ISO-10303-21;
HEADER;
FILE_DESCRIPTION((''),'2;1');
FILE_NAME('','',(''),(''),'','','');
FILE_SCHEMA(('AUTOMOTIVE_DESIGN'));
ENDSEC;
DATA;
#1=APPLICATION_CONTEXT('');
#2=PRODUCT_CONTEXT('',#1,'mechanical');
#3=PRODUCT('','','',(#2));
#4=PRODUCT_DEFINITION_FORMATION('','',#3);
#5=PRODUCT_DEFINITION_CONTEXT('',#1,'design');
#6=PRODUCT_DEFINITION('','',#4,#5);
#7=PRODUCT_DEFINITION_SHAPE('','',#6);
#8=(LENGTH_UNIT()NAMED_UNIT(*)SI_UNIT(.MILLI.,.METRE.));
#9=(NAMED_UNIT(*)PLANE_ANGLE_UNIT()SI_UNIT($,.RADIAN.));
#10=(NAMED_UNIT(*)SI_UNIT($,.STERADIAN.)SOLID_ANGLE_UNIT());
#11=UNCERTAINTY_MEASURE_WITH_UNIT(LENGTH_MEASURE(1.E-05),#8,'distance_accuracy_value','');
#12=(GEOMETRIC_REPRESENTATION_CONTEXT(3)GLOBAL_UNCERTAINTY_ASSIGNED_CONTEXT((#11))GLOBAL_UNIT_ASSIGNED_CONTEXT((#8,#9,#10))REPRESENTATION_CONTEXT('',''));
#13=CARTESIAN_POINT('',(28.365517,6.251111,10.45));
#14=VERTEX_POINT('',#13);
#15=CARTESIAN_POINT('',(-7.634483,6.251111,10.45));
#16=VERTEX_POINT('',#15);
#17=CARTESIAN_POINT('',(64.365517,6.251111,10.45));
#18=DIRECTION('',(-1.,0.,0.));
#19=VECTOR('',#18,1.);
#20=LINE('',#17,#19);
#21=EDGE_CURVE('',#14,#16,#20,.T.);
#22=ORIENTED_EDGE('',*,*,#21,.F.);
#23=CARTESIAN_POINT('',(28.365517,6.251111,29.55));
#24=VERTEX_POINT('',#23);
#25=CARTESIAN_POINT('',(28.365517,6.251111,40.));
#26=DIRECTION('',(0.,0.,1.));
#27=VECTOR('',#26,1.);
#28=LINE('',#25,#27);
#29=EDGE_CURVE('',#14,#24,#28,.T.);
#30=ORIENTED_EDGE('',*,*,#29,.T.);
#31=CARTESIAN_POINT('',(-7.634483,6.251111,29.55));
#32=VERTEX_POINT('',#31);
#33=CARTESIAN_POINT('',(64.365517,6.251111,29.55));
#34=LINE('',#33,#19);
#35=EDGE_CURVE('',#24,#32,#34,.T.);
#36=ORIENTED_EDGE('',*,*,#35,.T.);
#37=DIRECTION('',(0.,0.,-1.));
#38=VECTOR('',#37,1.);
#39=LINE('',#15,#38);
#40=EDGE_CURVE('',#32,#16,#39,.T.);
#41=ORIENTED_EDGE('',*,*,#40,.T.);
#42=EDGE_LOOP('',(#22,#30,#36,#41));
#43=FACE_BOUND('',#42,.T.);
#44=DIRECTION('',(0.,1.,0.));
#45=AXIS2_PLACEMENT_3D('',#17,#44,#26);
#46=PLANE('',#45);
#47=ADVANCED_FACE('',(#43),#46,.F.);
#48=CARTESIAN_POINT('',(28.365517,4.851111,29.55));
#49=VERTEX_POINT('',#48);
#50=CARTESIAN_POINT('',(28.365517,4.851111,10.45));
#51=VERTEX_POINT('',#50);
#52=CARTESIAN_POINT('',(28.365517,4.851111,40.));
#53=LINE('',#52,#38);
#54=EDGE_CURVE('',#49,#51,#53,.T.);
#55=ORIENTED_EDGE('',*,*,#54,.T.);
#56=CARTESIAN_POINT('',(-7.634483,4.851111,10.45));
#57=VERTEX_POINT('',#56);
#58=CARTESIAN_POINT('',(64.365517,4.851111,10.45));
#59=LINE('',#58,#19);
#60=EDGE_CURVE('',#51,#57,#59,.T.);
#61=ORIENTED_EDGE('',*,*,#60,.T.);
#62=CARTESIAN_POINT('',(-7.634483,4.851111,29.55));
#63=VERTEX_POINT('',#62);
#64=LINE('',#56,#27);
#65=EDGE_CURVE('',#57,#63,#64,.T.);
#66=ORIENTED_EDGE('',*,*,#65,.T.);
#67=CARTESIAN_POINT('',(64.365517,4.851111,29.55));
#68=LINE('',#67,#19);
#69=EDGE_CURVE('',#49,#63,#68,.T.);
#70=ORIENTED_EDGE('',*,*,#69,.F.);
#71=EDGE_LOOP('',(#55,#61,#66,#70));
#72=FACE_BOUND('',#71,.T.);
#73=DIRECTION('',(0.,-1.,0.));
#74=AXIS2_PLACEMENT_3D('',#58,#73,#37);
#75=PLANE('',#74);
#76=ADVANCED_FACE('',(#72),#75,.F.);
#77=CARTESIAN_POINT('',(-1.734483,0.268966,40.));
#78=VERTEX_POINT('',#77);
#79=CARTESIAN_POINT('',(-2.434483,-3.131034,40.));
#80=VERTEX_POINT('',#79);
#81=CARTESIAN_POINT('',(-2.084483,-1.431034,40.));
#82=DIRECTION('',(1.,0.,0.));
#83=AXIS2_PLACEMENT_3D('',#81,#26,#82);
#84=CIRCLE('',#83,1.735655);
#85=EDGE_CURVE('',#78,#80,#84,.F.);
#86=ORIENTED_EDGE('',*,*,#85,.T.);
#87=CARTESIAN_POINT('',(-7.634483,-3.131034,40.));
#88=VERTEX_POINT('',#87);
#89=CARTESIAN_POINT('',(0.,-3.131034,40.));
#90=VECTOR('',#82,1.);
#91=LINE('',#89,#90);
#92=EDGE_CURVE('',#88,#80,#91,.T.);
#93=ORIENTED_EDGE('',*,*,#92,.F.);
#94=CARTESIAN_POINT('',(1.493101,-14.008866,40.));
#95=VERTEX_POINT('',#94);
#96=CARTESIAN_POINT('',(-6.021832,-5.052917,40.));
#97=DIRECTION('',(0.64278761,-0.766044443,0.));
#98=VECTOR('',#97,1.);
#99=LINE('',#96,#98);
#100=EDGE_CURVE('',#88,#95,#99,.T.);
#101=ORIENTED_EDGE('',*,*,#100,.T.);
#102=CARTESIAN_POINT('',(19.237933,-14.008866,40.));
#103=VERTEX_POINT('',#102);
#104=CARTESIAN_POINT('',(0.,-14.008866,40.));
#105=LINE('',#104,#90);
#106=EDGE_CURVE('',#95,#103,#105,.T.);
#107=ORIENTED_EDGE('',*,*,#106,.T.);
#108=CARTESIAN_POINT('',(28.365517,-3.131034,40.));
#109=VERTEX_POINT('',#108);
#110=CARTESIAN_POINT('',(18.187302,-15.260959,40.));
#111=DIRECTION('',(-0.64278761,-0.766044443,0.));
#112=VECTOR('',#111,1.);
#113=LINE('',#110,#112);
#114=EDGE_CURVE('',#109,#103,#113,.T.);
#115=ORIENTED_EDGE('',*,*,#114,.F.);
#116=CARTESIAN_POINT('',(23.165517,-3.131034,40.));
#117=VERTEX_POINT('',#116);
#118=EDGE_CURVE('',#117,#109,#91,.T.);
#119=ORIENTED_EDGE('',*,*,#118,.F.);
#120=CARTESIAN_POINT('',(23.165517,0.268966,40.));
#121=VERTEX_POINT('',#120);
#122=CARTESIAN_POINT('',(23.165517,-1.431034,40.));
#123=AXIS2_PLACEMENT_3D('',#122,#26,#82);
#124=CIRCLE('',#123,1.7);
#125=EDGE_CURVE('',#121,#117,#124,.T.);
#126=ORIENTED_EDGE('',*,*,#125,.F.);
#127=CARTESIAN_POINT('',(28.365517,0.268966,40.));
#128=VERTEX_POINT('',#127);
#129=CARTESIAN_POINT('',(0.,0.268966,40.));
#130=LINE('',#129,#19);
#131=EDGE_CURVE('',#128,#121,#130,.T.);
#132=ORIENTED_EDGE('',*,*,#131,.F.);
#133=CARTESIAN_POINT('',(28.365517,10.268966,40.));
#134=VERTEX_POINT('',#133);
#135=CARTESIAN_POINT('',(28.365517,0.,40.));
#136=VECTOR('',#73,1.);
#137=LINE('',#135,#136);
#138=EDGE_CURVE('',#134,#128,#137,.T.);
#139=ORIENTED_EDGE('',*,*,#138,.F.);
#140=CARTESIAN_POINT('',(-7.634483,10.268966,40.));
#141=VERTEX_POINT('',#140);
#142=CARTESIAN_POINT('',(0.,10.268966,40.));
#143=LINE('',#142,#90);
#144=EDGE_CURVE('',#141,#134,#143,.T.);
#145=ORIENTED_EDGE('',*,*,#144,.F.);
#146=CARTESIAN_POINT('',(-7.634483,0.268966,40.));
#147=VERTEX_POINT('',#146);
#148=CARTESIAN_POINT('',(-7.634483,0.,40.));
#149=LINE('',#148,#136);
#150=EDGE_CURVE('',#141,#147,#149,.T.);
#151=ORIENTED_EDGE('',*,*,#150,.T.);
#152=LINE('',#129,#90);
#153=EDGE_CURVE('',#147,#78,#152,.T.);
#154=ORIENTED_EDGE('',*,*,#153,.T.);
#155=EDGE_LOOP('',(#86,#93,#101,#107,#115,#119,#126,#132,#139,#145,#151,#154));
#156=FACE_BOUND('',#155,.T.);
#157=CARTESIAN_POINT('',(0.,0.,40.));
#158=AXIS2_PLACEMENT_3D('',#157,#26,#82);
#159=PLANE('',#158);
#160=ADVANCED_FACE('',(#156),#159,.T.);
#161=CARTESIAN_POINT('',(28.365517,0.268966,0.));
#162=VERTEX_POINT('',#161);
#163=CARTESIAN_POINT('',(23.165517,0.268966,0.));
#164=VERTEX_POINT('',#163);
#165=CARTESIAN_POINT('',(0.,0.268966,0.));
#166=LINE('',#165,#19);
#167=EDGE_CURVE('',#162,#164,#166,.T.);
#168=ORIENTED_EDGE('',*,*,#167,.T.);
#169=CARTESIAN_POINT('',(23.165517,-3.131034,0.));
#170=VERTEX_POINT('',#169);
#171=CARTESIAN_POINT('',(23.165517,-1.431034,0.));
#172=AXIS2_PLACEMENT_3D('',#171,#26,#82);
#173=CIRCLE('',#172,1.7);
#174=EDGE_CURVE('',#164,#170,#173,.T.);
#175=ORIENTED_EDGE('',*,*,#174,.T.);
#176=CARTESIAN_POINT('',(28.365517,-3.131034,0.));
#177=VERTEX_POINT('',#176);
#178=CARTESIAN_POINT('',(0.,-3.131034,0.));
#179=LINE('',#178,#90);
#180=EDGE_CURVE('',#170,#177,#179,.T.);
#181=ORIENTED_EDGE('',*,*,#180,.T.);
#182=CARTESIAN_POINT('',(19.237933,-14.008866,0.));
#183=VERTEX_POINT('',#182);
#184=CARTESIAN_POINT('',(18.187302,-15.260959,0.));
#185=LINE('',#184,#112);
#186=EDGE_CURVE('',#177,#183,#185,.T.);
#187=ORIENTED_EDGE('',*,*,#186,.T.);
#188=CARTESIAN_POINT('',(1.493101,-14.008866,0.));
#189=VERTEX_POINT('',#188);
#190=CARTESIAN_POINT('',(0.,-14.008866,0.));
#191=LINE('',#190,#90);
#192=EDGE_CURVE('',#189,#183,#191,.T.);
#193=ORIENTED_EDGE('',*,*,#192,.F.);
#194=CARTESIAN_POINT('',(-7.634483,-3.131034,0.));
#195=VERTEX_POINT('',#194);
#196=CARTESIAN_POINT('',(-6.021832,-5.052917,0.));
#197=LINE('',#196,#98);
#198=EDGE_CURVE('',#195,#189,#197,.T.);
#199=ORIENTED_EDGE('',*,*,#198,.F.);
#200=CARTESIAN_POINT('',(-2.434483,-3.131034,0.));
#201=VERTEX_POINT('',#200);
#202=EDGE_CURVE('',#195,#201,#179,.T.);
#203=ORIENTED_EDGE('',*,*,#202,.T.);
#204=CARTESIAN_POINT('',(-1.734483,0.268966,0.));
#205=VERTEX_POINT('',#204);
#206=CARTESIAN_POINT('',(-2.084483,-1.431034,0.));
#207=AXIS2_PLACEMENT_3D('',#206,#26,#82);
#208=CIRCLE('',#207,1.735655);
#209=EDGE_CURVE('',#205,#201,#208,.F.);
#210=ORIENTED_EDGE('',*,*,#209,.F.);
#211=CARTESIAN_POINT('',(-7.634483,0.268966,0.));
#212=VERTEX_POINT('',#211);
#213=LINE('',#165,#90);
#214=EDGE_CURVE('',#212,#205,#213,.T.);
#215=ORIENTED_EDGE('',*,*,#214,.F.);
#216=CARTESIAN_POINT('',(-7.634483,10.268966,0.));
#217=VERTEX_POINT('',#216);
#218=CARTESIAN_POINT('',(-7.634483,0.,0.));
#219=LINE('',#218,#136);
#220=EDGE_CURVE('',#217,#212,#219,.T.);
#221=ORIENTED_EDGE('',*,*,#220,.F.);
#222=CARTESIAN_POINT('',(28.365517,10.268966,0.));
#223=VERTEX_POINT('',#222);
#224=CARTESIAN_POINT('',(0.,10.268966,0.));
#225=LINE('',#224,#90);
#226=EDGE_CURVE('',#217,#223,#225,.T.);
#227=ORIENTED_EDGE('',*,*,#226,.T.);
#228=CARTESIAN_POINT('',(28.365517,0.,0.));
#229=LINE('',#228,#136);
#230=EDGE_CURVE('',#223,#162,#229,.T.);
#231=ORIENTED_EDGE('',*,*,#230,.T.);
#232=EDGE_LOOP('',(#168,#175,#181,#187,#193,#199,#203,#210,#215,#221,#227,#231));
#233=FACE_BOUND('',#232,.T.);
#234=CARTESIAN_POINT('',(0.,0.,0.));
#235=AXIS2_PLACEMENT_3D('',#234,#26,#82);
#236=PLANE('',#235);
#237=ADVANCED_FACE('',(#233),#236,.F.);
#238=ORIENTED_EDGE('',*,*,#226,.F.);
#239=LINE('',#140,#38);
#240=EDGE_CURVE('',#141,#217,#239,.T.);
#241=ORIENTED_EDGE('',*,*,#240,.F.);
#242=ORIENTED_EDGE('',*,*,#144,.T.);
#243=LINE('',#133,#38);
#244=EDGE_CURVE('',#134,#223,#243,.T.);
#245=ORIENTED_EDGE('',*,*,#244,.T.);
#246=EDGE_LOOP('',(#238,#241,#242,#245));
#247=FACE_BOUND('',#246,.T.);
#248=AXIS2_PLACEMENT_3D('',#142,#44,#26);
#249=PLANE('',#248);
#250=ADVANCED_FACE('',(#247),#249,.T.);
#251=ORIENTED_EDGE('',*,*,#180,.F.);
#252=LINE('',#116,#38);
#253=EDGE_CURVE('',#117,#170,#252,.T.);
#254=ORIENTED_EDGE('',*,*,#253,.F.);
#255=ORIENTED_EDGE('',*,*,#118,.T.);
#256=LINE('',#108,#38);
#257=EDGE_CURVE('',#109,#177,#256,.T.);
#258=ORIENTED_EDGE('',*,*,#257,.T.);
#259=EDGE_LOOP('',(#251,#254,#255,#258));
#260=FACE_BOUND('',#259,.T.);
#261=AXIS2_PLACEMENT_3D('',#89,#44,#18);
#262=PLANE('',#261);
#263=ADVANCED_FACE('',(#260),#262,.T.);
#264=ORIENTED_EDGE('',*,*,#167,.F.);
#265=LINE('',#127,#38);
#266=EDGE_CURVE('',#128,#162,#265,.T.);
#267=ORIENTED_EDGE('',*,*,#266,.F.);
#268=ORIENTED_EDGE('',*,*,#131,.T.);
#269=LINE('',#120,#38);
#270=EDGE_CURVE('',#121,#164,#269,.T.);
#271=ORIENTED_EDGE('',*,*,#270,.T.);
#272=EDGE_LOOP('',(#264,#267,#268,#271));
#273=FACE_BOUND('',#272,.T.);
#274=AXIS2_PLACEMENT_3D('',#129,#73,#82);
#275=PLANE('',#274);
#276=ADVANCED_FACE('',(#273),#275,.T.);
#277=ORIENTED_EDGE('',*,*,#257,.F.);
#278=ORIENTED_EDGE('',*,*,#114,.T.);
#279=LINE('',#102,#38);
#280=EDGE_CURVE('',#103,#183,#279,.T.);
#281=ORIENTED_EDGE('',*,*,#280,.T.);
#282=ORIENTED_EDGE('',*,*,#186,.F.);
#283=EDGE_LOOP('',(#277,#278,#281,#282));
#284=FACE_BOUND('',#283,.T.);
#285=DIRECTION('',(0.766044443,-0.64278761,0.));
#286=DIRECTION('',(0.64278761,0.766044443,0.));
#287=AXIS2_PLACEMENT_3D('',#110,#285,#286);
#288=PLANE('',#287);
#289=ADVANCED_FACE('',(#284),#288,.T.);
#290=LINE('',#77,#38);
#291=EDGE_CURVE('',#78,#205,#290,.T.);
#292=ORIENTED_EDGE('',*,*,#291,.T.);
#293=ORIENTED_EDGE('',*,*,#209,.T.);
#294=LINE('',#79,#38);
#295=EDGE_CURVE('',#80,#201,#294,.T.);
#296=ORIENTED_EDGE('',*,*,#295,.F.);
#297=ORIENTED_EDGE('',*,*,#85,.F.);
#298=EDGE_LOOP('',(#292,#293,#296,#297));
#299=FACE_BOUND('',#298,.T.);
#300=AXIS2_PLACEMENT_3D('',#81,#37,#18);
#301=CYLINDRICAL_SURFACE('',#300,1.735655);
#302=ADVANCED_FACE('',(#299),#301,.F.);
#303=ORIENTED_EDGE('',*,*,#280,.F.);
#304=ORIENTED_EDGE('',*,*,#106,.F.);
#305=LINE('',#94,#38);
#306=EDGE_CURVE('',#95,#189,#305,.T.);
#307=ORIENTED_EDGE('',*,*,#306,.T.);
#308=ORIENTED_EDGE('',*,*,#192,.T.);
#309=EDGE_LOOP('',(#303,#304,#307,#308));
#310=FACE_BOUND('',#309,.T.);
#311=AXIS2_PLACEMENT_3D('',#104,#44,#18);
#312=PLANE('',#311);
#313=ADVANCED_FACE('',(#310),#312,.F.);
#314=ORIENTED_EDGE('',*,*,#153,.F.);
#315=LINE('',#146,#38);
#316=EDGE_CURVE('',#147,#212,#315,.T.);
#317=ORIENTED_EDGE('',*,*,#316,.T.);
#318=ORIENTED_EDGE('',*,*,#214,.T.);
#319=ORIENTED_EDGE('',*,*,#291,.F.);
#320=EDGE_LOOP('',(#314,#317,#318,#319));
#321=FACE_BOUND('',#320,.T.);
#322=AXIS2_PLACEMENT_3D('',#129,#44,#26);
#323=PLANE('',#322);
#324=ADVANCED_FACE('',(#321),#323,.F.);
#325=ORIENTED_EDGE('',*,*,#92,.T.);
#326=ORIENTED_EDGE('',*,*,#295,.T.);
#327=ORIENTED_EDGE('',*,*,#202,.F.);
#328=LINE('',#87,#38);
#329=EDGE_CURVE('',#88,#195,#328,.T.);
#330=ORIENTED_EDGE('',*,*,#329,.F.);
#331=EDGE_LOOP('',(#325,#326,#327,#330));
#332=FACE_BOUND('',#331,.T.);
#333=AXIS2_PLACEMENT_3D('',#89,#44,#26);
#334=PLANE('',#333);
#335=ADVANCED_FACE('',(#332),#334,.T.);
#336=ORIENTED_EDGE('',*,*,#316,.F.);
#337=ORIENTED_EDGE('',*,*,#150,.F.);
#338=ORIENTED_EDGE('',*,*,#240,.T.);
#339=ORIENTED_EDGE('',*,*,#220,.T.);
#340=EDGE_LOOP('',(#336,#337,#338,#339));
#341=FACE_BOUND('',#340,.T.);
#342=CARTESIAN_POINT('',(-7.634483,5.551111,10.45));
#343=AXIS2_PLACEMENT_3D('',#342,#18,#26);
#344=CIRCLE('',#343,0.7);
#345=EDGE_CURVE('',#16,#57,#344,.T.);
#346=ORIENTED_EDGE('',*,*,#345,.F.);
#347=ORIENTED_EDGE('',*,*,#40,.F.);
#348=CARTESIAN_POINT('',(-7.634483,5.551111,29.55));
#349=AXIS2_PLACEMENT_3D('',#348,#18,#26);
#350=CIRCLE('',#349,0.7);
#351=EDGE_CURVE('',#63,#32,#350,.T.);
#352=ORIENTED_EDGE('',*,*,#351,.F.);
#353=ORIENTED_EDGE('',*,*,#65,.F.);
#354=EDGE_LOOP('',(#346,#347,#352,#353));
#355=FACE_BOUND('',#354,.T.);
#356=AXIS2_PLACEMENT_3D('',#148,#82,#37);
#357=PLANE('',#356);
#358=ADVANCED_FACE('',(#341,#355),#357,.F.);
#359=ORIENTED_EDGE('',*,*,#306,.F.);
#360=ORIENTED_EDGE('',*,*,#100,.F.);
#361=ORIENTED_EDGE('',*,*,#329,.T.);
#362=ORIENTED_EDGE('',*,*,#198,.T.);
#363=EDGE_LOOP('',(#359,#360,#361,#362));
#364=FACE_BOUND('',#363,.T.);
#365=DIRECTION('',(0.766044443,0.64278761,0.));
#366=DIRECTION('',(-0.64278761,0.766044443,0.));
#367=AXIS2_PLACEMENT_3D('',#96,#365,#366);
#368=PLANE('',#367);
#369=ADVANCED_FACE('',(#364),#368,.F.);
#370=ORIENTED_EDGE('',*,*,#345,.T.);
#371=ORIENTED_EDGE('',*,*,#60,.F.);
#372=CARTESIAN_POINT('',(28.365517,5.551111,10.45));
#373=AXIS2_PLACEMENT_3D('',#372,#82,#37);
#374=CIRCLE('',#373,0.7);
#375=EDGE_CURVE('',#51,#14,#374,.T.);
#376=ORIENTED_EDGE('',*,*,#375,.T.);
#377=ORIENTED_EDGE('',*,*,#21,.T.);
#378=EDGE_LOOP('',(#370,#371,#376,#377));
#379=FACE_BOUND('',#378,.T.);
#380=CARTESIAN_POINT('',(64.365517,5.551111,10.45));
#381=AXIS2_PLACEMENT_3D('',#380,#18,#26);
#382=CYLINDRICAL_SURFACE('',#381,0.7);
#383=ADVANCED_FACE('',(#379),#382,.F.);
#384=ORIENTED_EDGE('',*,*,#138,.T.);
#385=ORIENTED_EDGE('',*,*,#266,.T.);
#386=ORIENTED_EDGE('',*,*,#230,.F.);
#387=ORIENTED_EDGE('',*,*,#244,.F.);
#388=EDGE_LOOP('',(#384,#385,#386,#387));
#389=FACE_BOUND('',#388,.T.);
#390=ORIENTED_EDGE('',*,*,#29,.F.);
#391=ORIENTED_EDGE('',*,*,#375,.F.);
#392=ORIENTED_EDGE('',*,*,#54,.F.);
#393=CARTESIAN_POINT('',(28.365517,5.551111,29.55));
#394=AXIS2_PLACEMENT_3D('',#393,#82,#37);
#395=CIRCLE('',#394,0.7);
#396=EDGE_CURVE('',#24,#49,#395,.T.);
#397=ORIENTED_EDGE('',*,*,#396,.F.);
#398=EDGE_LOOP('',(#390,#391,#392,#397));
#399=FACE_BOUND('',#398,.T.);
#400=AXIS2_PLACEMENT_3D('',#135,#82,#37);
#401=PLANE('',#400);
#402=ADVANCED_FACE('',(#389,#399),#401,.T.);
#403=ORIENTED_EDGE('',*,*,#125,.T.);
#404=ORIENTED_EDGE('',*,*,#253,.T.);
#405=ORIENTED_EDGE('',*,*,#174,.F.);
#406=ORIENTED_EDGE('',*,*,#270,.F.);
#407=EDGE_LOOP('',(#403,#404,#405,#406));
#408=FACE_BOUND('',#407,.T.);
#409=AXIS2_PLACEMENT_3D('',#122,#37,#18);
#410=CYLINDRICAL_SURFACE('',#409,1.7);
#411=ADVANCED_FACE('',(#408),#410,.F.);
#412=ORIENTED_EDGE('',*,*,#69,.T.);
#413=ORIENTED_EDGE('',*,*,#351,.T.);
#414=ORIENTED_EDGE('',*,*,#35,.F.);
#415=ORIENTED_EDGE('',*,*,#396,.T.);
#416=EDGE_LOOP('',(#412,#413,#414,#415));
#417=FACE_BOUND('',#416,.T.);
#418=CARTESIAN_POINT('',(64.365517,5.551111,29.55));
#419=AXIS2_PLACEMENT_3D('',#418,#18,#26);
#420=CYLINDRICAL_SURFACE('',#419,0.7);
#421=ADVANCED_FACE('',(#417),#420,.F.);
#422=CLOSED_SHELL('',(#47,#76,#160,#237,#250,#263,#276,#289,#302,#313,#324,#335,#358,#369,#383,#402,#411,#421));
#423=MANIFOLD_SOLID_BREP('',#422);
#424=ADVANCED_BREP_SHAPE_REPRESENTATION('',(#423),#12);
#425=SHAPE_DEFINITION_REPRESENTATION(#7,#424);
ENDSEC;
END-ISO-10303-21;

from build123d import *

# Parameters (mm, degrees)
BOSS_EXTRUDE3_DEPTH = 40
CUT_EXTRUDE1_DEPTH  = 72


# Read off the part's stored shape, not the designer's step: Boss-Extrude3
with BuildPart() as part:
    # Boss-Extrude3 outline → Boss-Extrude3 (new body)
    with BuildSketch(Plane.XY):
        with BuildLine():
            Line((28.365517241, -3.131034483), (23.165517241, -3.131034483))
            ThreePointArc((23.165517241, -3.131034483), (21.465517241, -1.431034483), (23.165517241, 0.268965517))
            Line((23.165517241, 0.268965517), (28.365517241, 0.268965517))
            Line((28.365517241, 0.268965517), (28.365517241, 10.268965517))
            Line((28.365517241, 10.268965517), (-7.634482759, 10.268965517))
            Line((-7.634482759, 10.268965517), (-7.634482759, 0.268965517))
            Line((-7.634482759, 0.268965517), (-1.734482759, 0.268965517))
            ThreePointArc((-1.734482759, 0.268965517), (-0.384482759, -1.781034483), (-2.434482759, -3.131034483))
            Line((-2.434482759, -3.131034483), (-7.634482759, -3.131034483))
            Line((-7.634482759, -3.131034483), (1.493101299, -14.008865575))
            Line((1.493101299, -14.008865575), (19.237933184, -14.008865575))
            Line((19.237933184, -14.008865575), (28.365517241, -3.131034483))
        make_face()
    extrude(amount=BOSS_EXTRUDE3_DEPTH)

    # Sketch4 → Cut-Extrude1 (cut)
    with BuildSketch(Plane.ZY.offset(7.634482759)):
        with BuildLine():
            Line((10.45, 6.251111401), (29.55, 6.251111401))
            ThreePointArc((29.55, 6.251111401), (30.25, 5.551111401), (29.55, 4.851111401))
            Line((29.55, 4.851111401), (10.45, 4.851111401))
            ThreePointArc((10.45, 4.851111401), (9.75, 5.551111401), (10.45, 6.251111401))
        make_face()
    extrude(amount=-CUT_EXTRUDE1_DEPTH, mode=Mode.SUBTRACT)


solid = part.part
